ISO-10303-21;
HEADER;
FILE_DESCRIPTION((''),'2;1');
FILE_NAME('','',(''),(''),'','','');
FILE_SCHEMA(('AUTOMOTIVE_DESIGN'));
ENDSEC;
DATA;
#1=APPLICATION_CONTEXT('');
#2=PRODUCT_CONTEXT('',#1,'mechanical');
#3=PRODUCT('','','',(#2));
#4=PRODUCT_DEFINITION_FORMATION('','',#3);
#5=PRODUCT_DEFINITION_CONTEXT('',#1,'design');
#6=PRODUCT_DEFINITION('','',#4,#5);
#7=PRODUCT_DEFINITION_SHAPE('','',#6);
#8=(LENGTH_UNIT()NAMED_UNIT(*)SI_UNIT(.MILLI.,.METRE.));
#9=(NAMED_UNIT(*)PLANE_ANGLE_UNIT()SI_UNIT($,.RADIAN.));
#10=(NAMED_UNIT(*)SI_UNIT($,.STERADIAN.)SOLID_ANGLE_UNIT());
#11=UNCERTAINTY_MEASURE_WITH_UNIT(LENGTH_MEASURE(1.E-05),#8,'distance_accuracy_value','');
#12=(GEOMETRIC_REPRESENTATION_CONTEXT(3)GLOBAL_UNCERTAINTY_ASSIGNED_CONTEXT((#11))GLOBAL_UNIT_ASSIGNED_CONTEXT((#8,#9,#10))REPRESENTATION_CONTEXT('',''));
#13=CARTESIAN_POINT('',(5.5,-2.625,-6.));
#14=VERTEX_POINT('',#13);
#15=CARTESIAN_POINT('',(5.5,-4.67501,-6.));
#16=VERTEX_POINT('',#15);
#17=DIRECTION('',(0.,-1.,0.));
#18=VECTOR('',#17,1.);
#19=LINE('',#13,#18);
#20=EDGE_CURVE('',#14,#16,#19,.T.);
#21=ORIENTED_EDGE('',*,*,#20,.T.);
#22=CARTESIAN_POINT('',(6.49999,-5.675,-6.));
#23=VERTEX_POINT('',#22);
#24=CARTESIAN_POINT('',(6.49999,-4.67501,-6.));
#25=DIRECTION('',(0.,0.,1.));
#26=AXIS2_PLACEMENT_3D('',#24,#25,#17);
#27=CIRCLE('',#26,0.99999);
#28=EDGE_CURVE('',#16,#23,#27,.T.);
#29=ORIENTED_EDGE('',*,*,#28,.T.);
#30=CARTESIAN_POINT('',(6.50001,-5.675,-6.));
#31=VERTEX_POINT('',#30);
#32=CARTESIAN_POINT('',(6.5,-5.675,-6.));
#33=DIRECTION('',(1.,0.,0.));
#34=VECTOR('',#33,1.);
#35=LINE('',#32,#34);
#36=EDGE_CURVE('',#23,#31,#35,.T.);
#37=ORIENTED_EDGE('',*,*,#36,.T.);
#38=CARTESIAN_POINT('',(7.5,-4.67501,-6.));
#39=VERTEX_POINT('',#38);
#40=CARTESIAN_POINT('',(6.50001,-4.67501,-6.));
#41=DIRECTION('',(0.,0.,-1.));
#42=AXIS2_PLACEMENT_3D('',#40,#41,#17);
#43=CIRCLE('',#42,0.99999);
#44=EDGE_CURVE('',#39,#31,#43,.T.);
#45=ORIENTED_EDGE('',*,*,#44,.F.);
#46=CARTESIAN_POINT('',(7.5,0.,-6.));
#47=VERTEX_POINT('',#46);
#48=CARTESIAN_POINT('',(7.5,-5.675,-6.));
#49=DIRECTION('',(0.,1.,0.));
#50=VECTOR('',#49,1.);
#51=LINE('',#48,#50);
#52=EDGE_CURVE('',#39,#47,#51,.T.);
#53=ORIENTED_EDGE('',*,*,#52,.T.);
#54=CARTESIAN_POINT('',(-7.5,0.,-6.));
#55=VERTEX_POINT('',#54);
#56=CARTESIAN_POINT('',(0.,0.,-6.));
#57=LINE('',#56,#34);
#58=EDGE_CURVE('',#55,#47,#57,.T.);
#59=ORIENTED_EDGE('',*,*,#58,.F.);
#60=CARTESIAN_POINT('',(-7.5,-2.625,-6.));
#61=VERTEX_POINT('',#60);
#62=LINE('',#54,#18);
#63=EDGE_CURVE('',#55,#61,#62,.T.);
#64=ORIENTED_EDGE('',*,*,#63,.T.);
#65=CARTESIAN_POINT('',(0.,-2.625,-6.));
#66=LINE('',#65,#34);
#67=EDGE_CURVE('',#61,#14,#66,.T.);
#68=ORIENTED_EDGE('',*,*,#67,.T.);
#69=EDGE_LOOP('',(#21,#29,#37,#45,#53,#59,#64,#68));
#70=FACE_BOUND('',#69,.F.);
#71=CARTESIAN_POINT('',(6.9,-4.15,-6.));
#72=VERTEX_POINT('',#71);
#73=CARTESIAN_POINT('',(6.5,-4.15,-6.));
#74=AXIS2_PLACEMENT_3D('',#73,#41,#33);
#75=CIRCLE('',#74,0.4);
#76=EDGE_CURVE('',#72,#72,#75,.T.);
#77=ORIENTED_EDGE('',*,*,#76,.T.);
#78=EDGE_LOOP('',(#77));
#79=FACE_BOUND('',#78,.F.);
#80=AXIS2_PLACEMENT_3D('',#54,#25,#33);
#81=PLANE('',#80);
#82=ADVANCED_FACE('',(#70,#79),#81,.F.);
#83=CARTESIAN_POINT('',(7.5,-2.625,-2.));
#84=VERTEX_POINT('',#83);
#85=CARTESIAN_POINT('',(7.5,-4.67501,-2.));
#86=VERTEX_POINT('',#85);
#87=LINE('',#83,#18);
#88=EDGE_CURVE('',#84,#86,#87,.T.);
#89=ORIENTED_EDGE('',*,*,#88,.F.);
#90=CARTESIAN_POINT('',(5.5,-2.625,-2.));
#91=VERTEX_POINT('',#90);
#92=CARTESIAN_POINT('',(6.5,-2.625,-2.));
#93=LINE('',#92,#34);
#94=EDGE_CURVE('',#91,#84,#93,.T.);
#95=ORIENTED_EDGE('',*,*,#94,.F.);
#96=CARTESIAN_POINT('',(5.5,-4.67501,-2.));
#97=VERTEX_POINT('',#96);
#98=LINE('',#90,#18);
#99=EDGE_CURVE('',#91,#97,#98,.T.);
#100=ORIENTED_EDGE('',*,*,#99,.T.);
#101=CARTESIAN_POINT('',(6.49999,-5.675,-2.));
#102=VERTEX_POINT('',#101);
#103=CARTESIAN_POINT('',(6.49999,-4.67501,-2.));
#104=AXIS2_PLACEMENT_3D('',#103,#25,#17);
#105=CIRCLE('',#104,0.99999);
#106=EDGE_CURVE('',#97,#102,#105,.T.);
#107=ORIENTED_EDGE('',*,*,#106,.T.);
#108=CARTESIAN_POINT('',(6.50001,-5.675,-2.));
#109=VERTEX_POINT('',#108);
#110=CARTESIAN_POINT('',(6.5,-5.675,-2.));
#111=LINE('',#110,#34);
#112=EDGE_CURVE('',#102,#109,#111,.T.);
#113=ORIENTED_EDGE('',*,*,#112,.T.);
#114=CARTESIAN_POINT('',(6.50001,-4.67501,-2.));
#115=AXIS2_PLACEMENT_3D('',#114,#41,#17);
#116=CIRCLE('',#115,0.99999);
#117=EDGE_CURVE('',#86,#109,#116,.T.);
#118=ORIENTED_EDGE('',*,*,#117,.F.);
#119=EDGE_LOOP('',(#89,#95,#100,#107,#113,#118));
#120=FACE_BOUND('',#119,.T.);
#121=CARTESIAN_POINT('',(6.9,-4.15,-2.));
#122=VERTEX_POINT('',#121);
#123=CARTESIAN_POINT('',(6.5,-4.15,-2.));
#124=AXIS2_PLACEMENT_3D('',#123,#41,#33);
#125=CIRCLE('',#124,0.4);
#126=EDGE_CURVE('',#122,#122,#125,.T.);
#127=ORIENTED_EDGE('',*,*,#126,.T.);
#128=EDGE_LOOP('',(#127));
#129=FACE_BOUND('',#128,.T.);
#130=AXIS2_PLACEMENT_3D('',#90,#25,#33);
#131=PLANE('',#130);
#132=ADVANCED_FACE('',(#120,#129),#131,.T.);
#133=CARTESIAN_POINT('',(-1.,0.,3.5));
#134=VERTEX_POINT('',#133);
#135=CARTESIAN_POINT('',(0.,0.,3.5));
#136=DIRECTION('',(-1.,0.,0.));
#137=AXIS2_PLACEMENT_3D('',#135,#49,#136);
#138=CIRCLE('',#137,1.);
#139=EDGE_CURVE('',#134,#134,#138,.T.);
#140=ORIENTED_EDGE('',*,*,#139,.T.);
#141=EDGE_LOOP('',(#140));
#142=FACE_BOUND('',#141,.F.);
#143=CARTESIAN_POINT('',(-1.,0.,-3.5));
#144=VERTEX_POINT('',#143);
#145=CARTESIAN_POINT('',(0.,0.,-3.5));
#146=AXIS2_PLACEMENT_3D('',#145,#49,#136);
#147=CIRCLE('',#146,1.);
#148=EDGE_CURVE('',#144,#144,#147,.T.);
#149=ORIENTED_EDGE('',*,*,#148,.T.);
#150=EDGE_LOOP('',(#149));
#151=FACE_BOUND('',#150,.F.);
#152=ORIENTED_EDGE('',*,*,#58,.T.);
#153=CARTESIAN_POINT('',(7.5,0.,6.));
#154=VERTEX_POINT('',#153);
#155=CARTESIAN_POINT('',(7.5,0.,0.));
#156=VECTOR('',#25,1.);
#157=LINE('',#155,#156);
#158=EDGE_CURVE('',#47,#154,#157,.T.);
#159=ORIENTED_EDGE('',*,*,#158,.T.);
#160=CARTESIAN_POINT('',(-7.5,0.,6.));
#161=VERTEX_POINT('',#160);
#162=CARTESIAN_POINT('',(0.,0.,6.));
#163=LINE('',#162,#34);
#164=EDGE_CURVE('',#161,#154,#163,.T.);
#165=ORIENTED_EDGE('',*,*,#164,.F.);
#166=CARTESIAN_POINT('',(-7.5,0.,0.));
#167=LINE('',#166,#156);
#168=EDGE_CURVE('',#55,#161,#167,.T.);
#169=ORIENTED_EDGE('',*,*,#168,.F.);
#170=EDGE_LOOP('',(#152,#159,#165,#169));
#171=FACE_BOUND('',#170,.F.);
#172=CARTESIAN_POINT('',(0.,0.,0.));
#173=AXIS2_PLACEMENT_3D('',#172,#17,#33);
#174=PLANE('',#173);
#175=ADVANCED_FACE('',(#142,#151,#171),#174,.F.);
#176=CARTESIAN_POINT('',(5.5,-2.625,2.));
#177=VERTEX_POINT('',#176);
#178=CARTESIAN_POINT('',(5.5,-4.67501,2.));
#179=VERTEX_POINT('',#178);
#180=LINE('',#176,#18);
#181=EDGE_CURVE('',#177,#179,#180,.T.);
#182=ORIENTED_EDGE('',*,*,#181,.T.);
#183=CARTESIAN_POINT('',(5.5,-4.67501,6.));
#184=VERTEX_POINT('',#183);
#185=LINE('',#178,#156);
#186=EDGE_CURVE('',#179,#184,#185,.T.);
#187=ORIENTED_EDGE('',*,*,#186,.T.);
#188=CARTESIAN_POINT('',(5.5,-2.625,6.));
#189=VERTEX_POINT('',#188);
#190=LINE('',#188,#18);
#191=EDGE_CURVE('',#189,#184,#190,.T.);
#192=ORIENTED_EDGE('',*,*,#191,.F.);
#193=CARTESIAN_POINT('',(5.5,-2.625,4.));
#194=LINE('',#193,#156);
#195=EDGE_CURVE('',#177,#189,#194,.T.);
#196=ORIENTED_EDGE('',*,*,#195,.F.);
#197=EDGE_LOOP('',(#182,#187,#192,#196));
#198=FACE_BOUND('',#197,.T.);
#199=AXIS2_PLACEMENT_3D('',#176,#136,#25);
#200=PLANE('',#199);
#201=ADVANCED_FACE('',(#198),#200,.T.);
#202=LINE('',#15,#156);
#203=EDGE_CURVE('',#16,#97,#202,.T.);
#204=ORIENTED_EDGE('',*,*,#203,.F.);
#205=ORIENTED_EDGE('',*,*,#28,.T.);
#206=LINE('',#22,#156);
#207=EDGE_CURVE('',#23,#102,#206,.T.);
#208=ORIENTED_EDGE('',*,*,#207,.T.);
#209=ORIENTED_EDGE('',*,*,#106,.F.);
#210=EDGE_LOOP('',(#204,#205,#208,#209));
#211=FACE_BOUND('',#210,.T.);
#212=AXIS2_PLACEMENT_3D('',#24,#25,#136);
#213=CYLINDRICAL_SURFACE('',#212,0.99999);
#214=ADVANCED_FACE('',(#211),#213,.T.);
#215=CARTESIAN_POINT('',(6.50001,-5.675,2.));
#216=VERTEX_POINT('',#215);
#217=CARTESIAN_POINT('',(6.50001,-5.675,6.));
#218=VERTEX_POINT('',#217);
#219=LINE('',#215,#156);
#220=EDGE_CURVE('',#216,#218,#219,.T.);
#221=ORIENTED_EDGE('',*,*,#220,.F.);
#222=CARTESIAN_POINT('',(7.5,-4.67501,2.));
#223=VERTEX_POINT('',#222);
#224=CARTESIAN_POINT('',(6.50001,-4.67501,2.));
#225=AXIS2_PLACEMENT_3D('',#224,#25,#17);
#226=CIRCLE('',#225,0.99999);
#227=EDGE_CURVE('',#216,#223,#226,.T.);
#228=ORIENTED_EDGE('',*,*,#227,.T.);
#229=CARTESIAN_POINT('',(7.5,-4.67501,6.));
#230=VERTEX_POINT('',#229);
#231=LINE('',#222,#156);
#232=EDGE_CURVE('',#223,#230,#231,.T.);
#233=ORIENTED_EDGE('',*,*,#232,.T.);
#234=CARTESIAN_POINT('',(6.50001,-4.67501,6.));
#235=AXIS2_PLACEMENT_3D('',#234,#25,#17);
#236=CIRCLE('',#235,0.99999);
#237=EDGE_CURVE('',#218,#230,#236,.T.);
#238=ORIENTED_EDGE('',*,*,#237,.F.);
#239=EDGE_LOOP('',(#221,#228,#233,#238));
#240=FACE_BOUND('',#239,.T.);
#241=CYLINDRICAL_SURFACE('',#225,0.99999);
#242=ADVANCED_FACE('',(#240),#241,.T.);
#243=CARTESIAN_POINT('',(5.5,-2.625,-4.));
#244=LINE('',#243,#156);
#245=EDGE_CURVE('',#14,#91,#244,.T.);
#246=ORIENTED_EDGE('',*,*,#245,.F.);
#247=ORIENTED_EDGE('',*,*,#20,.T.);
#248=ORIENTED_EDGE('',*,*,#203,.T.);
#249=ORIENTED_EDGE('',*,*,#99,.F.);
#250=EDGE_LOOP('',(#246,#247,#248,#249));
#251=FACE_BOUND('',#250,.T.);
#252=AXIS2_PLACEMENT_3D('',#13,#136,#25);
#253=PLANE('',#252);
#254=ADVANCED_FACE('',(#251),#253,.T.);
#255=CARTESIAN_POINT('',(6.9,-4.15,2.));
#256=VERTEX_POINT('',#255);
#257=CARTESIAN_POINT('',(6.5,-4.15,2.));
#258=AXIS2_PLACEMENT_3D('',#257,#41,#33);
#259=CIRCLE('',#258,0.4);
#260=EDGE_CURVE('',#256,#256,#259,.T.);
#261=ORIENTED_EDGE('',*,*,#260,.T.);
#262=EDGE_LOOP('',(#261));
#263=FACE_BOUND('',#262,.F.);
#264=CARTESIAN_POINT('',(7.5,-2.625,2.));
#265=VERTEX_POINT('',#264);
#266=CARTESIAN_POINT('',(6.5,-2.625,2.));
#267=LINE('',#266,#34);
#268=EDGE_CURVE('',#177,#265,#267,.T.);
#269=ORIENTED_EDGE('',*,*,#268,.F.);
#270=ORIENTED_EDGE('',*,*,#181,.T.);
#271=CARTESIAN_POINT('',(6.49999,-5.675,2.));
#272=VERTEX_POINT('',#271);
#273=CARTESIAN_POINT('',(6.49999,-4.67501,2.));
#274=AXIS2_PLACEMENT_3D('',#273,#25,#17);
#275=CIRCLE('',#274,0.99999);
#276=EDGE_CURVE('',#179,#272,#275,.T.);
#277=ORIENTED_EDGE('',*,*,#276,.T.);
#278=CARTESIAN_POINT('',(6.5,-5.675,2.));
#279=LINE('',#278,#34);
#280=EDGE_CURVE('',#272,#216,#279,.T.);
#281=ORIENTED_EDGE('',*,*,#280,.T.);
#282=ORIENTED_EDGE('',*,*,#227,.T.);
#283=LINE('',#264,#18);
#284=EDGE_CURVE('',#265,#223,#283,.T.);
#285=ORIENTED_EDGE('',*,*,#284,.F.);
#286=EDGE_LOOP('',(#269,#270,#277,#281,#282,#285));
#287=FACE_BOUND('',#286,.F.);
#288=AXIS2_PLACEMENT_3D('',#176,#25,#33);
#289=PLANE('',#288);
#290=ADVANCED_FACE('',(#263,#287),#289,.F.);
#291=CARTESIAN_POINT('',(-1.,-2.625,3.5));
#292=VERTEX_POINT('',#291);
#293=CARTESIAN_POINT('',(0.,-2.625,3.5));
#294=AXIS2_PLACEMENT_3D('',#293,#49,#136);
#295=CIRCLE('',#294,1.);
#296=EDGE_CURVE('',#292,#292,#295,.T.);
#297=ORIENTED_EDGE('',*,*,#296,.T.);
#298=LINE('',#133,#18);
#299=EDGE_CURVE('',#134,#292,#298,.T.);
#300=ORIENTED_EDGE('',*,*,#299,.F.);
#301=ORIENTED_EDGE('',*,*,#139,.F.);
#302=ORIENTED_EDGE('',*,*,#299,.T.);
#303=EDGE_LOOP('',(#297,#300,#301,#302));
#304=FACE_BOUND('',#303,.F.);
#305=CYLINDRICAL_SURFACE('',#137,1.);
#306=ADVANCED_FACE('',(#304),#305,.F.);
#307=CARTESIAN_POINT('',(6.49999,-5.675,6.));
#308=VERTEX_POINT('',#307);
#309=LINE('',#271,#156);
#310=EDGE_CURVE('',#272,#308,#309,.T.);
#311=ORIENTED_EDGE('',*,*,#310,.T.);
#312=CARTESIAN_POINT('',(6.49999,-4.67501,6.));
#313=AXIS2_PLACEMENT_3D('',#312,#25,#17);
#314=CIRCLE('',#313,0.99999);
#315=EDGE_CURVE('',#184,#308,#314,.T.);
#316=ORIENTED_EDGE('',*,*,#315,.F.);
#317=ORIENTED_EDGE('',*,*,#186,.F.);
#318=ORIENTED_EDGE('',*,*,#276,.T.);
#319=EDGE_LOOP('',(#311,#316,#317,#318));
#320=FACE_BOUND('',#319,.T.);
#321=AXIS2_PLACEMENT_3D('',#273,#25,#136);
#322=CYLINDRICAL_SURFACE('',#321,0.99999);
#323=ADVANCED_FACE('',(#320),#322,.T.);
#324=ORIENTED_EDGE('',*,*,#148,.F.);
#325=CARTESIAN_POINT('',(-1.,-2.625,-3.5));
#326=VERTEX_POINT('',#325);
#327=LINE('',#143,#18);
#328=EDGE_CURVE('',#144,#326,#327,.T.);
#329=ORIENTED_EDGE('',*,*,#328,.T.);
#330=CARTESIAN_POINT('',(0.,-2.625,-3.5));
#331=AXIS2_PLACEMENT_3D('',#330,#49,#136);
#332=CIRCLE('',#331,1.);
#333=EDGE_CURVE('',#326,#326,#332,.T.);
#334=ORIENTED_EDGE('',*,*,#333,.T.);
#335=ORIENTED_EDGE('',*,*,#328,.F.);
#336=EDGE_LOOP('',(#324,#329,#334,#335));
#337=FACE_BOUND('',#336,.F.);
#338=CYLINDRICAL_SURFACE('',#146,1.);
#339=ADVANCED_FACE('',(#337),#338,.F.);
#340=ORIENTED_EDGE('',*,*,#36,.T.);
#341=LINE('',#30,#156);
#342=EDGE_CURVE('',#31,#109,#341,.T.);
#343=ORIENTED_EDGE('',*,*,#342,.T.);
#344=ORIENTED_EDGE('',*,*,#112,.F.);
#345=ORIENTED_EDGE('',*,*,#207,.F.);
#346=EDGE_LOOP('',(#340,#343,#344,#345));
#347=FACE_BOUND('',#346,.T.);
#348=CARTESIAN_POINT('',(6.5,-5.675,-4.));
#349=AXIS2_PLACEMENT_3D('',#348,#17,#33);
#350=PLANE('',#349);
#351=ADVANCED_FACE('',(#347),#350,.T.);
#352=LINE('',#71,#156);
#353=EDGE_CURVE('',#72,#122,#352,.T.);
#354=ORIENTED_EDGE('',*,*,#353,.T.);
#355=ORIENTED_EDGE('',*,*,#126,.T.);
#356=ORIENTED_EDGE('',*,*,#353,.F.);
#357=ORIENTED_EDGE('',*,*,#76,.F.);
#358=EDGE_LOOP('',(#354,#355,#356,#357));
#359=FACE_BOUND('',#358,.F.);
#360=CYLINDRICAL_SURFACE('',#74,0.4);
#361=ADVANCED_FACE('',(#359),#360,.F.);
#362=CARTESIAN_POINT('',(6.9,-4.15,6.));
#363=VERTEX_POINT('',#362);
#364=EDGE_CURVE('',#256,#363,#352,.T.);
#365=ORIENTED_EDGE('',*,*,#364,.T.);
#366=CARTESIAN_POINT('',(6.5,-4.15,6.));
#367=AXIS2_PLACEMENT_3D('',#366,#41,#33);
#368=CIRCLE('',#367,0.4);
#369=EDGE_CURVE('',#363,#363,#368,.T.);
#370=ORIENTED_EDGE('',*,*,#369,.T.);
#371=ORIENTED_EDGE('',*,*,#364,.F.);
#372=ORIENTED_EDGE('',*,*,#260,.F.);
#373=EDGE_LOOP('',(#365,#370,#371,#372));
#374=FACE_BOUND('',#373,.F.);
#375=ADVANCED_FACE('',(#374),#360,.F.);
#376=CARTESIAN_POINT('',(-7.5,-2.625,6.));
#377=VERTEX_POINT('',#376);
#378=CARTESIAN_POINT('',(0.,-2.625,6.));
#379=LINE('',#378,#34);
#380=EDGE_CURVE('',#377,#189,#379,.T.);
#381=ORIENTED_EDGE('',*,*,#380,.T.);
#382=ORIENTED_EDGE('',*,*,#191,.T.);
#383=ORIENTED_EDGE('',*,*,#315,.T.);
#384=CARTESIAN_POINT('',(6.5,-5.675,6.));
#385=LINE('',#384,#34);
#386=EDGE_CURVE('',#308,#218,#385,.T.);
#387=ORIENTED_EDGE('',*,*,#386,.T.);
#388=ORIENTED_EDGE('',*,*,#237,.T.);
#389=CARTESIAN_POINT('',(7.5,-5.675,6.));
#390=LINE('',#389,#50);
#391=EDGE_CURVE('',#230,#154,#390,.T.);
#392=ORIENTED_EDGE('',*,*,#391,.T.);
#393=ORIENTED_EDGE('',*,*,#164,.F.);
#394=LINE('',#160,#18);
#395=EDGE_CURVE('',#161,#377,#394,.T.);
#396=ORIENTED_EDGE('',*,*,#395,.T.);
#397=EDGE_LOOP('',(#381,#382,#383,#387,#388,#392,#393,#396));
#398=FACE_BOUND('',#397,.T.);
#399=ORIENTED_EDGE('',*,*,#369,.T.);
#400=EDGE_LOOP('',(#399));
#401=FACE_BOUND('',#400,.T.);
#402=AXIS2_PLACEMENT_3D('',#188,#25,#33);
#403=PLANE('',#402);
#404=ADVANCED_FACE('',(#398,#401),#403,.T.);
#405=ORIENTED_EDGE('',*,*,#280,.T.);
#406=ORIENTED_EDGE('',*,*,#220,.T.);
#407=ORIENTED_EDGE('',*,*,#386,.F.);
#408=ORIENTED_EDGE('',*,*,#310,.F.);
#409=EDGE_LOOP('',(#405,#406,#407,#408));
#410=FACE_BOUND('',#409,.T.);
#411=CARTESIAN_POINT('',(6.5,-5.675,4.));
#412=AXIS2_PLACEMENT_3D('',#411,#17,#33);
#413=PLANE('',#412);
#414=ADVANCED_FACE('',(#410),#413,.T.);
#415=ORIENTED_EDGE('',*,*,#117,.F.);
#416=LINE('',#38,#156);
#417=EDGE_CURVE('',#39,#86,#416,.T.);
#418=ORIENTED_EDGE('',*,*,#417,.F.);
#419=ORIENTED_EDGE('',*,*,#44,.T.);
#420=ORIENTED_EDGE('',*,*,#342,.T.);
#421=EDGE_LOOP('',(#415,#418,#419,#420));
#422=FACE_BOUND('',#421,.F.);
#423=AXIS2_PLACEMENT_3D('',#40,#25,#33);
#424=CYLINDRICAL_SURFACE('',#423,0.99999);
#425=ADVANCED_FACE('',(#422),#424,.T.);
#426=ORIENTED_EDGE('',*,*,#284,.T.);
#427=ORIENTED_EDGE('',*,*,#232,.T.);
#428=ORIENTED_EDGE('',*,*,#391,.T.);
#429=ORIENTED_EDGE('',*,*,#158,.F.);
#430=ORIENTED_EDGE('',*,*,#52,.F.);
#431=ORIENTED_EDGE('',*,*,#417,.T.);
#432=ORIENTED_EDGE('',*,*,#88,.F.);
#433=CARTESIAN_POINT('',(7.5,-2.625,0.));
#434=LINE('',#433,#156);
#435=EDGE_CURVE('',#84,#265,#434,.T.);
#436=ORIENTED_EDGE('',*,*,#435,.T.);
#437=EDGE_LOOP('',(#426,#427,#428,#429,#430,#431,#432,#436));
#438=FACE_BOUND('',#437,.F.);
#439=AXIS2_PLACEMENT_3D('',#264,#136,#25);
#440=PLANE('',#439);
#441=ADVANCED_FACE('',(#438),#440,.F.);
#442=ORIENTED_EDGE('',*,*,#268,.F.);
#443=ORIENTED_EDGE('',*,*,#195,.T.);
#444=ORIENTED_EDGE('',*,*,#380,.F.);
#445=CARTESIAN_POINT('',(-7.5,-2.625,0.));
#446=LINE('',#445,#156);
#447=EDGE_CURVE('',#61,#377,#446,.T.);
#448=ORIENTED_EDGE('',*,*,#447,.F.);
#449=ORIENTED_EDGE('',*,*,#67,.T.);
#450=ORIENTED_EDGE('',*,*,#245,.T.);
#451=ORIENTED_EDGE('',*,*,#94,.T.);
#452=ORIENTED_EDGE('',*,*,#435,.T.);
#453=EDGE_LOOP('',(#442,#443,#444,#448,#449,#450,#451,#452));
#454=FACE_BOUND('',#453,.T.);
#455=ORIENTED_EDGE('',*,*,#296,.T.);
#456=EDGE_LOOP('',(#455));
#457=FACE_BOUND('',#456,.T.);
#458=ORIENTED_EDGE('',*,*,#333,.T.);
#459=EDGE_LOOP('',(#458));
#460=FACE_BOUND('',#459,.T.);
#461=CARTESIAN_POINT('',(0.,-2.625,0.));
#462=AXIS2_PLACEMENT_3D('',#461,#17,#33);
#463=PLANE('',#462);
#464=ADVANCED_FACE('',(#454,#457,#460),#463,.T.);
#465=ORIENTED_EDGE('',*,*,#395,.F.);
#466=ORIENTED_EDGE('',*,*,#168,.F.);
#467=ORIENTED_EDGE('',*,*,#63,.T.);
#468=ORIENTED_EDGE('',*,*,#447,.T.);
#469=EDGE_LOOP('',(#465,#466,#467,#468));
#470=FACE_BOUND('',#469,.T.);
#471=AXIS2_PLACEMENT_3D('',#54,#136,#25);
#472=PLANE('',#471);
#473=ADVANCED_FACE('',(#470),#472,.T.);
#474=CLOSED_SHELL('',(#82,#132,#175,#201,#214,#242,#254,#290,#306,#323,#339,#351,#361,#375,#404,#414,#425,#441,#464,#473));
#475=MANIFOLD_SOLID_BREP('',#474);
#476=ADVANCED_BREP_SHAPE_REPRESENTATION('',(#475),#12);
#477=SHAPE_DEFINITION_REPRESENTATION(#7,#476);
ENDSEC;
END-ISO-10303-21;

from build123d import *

# Parameters (mm, degrees)
F0_W     = 15
F0_H     = 12
F1_DEPTH = 2.625
F2_W     = 2
F2_H     = 4
F3_DEPTH = 3.05
F4_R     = 0.4
F5_DEPTH = 25
F6_R     = 0.99999
F7_R     = 1
F8_DEPTH = 25


# Not quite as in the source:
# - a fillet or chamfer is up to 0.001 mm smaller than in the source, because OpenCascade refuses the exact size


with BuildPart() as f1:
    # F0 (on Front) → F1 (new body)
    with BuildSketch(Plane.XZ):
        Rectangle(F0_W, F0_H)
    extrude(amount=F1_DEPTH)

    # F2 (on face) → F3 (join)
    with BuildSketch(Plane.XZ.offset(2.625)):
        with Locations((6.5, 4)):
            Rectangle(F2_W, F2_H)
        with Locations((6.5, -4)):
            Rectangle(F2_W, F2_H)
    extrude(amount=F3_DEPTH)

    # F4 (on face) → F5 (cut)
    with BuildSketch(Plane(origin=(0, 0, -6), x_dir=(1, 0, 0), z_dir=(0, 0, -1))):
        with Locations((6.5, 4.15)):
            Circle(F4_R)
    extrude(amount=-F5_DEPTH, mode=Mode.SUBTRACT)

    # F6 (radius 1 in the source; OpenCascade refuses exactly that, so slightly less here)
    f6_edges = [f1.edges().sort_by_distance(p)[0] for p in [
        (7.5, -5.675, 4),
        (5.5, -5.675, 4),
        (7.5, -5.675, -4),
        (5.5, -5.675, -4),
    ]]
    fillet(f6_edges, radius=F6_R)

    # F7 (on face) → F8 (cut)
    with BuildSketch(Plane(origin=(0, 0, 0), x_dir=(-1, 0, 0), z_dir=(0, 1, 0))):
        with Locations((0, 3.5)):
            Circle(F7_R)
        with Locations((0, -3.5)):
            Circle(F7_R)
    extrude(amount=-F8_DEPTH, mode=Mode.SUBTRACT)


solid = f1.part
